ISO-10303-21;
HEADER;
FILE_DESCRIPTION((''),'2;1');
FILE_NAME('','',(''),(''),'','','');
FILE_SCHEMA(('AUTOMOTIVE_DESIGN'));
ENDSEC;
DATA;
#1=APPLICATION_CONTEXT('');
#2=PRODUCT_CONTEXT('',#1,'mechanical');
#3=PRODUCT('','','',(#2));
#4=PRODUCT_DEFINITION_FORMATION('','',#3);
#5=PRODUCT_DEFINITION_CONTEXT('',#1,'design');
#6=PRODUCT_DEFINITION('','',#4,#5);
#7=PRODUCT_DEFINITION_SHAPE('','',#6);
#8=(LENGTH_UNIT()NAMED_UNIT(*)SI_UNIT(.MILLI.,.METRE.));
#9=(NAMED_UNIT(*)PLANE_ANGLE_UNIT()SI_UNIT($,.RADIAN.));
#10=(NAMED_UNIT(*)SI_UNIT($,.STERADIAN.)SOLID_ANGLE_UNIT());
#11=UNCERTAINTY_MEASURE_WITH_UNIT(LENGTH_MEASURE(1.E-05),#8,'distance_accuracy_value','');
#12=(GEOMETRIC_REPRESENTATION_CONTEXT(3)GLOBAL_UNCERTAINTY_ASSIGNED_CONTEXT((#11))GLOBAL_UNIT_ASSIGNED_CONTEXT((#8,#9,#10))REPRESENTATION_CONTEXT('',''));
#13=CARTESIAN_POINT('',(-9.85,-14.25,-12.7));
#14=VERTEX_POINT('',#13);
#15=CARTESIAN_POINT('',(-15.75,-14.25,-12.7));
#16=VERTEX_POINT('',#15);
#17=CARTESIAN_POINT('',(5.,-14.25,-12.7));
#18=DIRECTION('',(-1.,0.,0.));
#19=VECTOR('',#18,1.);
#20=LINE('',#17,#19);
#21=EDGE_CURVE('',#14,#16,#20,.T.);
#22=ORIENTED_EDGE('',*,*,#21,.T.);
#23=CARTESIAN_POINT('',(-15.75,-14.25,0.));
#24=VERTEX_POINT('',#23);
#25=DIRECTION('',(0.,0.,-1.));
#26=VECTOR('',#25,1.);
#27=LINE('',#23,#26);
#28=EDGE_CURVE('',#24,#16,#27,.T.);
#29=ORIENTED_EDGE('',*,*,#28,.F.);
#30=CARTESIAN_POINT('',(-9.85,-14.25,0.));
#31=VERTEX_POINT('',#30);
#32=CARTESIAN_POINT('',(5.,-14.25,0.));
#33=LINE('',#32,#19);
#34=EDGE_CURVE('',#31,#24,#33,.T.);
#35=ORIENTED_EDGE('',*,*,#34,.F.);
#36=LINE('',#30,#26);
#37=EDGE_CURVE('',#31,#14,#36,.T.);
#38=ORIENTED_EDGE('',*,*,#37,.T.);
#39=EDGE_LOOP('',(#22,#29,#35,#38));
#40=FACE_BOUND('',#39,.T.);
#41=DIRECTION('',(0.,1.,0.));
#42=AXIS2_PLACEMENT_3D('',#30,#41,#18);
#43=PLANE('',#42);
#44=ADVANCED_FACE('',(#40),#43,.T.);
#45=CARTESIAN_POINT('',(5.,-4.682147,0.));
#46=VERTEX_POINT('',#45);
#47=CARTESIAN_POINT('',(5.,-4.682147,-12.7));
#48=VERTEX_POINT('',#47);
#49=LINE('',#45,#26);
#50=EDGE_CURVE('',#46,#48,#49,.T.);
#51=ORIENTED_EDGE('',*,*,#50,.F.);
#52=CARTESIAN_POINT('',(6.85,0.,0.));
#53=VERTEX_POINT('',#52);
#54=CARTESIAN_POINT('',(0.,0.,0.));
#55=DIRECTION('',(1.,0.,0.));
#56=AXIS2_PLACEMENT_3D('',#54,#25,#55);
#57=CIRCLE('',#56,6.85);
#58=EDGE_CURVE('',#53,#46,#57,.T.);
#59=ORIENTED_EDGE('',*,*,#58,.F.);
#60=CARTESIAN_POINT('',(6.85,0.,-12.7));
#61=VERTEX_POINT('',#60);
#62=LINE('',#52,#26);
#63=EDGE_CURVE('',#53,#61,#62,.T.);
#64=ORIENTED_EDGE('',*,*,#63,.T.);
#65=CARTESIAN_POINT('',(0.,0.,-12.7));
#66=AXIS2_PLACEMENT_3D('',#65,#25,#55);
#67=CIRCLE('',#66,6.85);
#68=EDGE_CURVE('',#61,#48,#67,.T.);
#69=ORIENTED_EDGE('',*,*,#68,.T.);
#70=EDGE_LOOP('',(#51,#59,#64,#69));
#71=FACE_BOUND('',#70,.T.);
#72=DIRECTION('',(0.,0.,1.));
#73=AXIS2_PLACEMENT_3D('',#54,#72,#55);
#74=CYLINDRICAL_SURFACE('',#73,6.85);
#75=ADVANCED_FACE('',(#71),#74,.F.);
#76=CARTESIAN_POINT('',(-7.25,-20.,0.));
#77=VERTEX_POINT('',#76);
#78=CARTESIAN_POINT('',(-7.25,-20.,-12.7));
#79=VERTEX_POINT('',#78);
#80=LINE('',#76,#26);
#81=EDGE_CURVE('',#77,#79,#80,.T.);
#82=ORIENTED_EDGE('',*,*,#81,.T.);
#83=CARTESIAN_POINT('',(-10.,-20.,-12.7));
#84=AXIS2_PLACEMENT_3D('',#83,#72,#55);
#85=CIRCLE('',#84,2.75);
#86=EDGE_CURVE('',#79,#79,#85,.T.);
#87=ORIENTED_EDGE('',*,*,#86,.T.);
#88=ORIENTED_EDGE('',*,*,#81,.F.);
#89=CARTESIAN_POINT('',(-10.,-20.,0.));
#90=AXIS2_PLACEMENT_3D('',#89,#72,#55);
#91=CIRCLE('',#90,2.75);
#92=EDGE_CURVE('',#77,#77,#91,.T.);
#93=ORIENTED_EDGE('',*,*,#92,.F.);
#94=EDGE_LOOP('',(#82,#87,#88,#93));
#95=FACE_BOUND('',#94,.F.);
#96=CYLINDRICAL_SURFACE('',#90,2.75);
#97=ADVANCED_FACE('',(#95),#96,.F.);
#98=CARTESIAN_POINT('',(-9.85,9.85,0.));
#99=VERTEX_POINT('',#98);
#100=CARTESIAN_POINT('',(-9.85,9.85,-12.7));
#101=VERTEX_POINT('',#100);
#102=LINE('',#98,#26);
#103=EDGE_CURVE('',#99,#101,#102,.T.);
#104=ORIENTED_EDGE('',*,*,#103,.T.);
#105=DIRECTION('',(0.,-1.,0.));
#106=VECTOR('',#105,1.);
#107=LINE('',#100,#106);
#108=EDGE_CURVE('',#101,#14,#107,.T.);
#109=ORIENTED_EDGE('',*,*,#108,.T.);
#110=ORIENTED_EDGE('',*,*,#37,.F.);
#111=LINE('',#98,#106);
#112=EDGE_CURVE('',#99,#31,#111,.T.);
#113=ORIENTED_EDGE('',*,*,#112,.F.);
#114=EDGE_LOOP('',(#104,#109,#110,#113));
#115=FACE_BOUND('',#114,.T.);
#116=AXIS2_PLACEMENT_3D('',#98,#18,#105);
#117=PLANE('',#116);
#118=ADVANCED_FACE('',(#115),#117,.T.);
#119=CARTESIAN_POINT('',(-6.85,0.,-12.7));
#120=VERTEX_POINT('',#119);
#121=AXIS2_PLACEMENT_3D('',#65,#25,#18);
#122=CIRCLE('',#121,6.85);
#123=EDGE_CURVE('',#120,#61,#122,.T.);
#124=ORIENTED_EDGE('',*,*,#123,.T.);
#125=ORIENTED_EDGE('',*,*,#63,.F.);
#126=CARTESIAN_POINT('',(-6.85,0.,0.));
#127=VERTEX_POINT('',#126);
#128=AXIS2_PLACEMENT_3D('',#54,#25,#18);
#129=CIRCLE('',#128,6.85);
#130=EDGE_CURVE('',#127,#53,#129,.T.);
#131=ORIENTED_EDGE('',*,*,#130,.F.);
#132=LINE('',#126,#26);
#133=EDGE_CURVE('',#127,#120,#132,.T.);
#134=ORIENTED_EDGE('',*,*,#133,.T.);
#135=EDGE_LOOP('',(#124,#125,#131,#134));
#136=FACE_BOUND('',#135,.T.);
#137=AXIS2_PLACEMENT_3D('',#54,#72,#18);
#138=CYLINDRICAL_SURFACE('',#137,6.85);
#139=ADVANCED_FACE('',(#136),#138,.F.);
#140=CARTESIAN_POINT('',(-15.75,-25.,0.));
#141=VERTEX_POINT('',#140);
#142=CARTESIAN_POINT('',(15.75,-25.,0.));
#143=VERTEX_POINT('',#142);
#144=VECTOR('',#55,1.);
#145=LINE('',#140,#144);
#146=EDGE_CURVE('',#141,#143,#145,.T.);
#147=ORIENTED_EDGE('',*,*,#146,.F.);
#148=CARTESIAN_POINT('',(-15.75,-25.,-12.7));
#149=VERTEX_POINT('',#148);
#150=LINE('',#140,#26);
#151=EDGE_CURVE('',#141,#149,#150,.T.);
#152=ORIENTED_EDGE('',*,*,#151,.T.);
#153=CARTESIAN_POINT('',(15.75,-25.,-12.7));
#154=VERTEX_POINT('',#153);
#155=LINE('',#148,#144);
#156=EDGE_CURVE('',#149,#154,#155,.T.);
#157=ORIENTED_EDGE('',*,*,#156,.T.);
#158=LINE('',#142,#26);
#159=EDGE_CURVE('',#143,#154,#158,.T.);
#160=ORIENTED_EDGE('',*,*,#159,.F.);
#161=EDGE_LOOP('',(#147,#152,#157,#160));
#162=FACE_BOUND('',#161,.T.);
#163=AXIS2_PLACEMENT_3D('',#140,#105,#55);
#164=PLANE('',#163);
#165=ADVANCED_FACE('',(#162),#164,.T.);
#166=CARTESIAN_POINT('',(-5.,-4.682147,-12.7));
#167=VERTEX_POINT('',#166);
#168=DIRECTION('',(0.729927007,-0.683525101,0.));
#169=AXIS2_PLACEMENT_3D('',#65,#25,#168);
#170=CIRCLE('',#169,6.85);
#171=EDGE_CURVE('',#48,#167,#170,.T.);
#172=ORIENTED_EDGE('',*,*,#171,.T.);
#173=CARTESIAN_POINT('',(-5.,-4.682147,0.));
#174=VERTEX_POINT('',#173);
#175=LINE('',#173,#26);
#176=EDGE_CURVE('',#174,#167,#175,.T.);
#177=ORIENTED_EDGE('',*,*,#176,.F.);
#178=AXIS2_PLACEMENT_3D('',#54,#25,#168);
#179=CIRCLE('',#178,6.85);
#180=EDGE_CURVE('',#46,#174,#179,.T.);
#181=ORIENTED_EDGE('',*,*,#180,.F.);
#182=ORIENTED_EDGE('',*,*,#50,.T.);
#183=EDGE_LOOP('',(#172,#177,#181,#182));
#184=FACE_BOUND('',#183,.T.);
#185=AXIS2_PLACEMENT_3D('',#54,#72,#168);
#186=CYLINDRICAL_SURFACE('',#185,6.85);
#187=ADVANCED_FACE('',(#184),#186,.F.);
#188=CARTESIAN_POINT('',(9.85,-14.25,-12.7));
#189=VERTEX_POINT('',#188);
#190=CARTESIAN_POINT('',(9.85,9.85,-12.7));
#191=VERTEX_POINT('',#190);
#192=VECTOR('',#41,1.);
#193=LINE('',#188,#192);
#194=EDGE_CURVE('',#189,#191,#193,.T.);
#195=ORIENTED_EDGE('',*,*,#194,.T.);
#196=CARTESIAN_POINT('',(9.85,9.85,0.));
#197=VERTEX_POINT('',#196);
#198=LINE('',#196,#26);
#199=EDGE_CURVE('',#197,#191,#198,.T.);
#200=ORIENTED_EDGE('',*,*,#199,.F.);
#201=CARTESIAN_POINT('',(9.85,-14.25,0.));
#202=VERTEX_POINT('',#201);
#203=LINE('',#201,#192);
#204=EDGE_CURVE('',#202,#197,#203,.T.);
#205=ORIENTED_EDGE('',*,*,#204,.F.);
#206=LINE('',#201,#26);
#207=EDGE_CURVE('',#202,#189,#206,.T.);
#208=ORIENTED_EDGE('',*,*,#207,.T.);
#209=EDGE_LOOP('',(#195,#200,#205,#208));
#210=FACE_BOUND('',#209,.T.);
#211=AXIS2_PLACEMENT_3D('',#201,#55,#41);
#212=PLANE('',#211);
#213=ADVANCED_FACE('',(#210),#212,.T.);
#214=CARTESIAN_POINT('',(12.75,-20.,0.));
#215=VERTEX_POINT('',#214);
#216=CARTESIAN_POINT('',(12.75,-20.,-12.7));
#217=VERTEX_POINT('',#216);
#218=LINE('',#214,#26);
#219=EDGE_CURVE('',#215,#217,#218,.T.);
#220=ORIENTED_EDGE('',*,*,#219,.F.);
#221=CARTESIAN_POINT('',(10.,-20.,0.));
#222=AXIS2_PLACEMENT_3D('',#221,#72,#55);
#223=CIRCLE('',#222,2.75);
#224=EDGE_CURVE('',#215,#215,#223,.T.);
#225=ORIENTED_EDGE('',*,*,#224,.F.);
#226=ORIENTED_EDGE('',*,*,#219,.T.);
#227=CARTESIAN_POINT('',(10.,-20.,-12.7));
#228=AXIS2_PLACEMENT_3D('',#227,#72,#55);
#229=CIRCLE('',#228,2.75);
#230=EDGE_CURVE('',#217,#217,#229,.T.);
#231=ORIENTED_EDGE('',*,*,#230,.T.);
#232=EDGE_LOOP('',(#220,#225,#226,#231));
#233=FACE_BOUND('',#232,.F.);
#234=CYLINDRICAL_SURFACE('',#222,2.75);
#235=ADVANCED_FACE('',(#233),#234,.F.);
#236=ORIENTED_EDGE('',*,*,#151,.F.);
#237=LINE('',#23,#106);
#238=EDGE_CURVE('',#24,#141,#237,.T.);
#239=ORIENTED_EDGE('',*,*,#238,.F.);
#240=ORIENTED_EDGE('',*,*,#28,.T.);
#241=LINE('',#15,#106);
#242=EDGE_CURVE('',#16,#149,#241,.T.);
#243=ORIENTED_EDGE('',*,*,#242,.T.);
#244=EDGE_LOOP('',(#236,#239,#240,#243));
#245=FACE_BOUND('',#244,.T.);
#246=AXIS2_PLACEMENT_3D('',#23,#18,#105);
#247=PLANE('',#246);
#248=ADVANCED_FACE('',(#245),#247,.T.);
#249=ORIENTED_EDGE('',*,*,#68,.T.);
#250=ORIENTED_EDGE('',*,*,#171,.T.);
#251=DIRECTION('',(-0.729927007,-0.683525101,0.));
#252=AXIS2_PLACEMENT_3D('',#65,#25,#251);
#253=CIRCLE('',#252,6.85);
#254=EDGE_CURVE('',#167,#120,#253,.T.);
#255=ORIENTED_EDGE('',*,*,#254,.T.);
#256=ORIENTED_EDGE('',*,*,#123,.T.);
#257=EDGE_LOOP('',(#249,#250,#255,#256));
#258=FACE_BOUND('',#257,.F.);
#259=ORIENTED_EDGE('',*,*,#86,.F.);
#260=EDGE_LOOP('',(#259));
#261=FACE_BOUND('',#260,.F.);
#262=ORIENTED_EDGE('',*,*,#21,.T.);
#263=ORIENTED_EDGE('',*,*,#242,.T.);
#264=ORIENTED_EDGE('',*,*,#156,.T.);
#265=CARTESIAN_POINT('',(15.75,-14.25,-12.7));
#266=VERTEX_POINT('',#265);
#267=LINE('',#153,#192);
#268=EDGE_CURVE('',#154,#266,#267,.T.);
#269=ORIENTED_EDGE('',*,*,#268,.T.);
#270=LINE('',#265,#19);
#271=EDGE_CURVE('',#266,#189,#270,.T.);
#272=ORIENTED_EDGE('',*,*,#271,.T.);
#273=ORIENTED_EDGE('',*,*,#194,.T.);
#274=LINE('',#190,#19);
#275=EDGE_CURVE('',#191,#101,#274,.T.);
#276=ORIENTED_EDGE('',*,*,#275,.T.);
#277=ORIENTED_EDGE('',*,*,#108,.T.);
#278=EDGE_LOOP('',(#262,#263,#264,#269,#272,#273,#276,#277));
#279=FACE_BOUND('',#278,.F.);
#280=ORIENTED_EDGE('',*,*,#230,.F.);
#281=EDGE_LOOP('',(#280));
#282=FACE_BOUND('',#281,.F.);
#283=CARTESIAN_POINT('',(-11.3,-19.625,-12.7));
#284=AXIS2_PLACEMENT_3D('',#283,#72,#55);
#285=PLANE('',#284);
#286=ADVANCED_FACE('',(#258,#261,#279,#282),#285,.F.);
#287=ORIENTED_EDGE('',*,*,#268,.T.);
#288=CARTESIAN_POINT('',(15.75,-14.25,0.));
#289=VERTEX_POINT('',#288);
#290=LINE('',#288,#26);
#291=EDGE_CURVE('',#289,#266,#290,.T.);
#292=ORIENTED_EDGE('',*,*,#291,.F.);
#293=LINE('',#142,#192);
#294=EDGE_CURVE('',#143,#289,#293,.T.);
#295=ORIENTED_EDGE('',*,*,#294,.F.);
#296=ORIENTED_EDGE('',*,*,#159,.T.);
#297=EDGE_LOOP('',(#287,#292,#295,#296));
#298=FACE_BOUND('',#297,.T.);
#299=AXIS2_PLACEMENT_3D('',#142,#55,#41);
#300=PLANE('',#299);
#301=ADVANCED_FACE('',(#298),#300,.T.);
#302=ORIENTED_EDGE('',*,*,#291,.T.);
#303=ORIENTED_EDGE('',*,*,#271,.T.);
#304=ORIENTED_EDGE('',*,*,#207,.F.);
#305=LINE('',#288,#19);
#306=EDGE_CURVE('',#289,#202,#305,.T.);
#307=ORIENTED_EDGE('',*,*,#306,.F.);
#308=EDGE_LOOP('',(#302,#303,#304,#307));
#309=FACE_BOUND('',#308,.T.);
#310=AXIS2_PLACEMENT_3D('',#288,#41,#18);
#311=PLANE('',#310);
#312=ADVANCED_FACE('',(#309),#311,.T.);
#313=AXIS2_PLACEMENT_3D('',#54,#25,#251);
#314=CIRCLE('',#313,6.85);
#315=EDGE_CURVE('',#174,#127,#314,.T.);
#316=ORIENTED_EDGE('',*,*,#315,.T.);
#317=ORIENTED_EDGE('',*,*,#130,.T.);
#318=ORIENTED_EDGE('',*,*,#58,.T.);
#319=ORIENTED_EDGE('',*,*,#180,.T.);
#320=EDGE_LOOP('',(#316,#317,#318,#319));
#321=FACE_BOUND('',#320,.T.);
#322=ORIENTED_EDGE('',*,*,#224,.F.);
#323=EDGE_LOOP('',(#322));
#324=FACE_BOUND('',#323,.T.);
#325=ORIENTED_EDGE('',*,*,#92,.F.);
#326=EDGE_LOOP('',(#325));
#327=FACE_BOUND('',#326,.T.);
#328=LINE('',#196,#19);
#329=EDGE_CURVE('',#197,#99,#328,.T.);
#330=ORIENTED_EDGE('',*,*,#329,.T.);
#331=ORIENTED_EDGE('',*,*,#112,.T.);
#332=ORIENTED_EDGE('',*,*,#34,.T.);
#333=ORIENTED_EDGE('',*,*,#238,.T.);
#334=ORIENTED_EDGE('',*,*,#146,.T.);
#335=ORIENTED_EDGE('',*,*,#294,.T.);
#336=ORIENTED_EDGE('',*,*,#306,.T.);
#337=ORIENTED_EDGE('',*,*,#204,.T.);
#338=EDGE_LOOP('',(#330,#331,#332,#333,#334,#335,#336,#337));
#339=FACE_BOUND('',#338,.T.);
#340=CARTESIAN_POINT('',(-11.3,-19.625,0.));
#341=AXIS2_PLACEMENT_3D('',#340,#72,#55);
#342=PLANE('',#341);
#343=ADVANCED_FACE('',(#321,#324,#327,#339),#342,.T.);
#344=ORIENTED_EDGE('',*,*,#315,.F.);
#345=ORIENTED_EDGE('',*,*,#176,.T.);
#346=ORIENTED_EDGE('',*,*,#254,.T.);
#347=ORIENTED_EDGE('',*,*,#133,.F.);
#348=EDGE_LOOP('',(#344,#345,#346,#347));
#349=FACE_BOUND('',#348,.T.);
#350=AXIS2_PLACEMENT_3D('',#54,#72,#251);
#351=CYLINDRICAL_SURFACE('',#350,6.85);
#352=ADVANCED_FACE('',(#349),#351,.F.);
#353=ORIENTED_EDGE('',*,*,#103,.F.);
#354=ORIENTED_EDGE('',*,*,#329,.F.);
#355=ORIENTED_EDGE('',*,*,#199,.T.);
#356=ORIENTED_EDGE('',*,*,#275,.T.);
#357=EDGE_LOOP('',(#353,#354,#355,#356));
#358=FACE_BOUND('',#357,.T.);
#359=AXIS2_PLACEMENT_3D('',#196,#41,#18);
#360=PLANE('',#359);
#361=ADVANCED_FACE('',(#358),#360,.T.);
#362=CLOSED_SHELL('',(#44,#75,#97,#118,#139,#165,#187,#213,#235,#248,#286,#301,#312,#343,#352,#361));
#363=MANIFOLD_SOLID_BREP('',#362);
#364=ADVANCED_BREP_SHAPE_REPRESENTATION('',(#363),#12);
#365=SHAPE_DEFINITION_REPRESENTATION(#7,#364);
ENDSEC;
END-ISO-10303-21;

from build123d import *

# Parameters (mm, degrees)
F0_R     = 2.75
F0_W     = 1.85
F0_H     = 10.75
F0_W_2   = 10
F1_DEPTH = 12.7


# Not quite as in the source:
# - a length typed as a fraction of an inch, garbled in the dataset ("3 / 203.2 mm" for 3/8 in), is restored


with BuildPart() as f1:
    # F0 (on Top) → F1 (new body)
    with BuildSketch(Plane.XY):
        Polygon((-15.75, -14.25), (-15.75, -25), (-6.85, -25), (-6.85, -14.25), (-9.85, -14.25), align=None)
        with Locations((-10, -20)):
            Circle(F0_R, mode=Mode.SUBTRACT)
        with Locations((-5.925, -19.625)):
            Rectangle(F0_W, F0_H)
        with Locations((0, -19.625)):
            Rectangle(F0_W_2, F0_H)
        with BuildLine():
            Line((-9.85, -14.25), (-6.85, -14.25))
            Line((-6.85, -14.25), (-6.85, 0))
            ThreePointArc((-6.85, 0), (0, 6.85), (6.85, 0))
            Line((6.85, 0), (6.85, -14.25))
            Line((6.85, -14.25), (9.85, -14.25))
            Line((9.85, -14.25), (9.85, 9.85))
            Line((9.85, 9.85), (-9.85, 9.85))
            Line((-9.85, 9.85), (-9.85, -14.25))
        make_face()
        with Locations((5.925, -19.625)):
            Rectangle(F0_W, F0_H)
        Polygon((6.85, -14.25), (6.85, -25), (15.75, -25), (15.75, -14.25), (9.85, -14.25), align=None)
        with Locations((10, -20)):
            Circle(F0_R, mode=Mode.SUBTRACT)
        with BuildLine():
            Line((-6.85, 0), (-6.85, -14.25))
            Line((-6.85, -14.25), (-5, -14.25))
            Line((-5, -14.25), (-5, -4.6821469434))
            ThreePointArc((-5, -4.6821469434), (-6.3707338667, -2.5171908946), (-6.85, 0))
        make_face()
        with BuildLine():
            Line((5, -4.6821469434), (5, -14.25))
            Line((5, -14.25), (6.85, -14.25))
            Line((6.85, -14.25), (6.85, 0))
            ThreePointArc((6.85, 0), (6.3707338667, -2.5171908946), (5, -4.6821469434))
        make_face()
        with BuildLine():
            Line((-5, -4.6821469434), (-5, -14.25))
            Line((-5, -14.25), (5, -14.25))
            Line((5, -14.25), (5, -4.6821469434))
            ThreePointArc((5, -4.6821469434), (0, -6.85), (-5, -4.6821469434))
        make_face()
    extrude(amount=-F1_DEPTH)


solid = f1.part
